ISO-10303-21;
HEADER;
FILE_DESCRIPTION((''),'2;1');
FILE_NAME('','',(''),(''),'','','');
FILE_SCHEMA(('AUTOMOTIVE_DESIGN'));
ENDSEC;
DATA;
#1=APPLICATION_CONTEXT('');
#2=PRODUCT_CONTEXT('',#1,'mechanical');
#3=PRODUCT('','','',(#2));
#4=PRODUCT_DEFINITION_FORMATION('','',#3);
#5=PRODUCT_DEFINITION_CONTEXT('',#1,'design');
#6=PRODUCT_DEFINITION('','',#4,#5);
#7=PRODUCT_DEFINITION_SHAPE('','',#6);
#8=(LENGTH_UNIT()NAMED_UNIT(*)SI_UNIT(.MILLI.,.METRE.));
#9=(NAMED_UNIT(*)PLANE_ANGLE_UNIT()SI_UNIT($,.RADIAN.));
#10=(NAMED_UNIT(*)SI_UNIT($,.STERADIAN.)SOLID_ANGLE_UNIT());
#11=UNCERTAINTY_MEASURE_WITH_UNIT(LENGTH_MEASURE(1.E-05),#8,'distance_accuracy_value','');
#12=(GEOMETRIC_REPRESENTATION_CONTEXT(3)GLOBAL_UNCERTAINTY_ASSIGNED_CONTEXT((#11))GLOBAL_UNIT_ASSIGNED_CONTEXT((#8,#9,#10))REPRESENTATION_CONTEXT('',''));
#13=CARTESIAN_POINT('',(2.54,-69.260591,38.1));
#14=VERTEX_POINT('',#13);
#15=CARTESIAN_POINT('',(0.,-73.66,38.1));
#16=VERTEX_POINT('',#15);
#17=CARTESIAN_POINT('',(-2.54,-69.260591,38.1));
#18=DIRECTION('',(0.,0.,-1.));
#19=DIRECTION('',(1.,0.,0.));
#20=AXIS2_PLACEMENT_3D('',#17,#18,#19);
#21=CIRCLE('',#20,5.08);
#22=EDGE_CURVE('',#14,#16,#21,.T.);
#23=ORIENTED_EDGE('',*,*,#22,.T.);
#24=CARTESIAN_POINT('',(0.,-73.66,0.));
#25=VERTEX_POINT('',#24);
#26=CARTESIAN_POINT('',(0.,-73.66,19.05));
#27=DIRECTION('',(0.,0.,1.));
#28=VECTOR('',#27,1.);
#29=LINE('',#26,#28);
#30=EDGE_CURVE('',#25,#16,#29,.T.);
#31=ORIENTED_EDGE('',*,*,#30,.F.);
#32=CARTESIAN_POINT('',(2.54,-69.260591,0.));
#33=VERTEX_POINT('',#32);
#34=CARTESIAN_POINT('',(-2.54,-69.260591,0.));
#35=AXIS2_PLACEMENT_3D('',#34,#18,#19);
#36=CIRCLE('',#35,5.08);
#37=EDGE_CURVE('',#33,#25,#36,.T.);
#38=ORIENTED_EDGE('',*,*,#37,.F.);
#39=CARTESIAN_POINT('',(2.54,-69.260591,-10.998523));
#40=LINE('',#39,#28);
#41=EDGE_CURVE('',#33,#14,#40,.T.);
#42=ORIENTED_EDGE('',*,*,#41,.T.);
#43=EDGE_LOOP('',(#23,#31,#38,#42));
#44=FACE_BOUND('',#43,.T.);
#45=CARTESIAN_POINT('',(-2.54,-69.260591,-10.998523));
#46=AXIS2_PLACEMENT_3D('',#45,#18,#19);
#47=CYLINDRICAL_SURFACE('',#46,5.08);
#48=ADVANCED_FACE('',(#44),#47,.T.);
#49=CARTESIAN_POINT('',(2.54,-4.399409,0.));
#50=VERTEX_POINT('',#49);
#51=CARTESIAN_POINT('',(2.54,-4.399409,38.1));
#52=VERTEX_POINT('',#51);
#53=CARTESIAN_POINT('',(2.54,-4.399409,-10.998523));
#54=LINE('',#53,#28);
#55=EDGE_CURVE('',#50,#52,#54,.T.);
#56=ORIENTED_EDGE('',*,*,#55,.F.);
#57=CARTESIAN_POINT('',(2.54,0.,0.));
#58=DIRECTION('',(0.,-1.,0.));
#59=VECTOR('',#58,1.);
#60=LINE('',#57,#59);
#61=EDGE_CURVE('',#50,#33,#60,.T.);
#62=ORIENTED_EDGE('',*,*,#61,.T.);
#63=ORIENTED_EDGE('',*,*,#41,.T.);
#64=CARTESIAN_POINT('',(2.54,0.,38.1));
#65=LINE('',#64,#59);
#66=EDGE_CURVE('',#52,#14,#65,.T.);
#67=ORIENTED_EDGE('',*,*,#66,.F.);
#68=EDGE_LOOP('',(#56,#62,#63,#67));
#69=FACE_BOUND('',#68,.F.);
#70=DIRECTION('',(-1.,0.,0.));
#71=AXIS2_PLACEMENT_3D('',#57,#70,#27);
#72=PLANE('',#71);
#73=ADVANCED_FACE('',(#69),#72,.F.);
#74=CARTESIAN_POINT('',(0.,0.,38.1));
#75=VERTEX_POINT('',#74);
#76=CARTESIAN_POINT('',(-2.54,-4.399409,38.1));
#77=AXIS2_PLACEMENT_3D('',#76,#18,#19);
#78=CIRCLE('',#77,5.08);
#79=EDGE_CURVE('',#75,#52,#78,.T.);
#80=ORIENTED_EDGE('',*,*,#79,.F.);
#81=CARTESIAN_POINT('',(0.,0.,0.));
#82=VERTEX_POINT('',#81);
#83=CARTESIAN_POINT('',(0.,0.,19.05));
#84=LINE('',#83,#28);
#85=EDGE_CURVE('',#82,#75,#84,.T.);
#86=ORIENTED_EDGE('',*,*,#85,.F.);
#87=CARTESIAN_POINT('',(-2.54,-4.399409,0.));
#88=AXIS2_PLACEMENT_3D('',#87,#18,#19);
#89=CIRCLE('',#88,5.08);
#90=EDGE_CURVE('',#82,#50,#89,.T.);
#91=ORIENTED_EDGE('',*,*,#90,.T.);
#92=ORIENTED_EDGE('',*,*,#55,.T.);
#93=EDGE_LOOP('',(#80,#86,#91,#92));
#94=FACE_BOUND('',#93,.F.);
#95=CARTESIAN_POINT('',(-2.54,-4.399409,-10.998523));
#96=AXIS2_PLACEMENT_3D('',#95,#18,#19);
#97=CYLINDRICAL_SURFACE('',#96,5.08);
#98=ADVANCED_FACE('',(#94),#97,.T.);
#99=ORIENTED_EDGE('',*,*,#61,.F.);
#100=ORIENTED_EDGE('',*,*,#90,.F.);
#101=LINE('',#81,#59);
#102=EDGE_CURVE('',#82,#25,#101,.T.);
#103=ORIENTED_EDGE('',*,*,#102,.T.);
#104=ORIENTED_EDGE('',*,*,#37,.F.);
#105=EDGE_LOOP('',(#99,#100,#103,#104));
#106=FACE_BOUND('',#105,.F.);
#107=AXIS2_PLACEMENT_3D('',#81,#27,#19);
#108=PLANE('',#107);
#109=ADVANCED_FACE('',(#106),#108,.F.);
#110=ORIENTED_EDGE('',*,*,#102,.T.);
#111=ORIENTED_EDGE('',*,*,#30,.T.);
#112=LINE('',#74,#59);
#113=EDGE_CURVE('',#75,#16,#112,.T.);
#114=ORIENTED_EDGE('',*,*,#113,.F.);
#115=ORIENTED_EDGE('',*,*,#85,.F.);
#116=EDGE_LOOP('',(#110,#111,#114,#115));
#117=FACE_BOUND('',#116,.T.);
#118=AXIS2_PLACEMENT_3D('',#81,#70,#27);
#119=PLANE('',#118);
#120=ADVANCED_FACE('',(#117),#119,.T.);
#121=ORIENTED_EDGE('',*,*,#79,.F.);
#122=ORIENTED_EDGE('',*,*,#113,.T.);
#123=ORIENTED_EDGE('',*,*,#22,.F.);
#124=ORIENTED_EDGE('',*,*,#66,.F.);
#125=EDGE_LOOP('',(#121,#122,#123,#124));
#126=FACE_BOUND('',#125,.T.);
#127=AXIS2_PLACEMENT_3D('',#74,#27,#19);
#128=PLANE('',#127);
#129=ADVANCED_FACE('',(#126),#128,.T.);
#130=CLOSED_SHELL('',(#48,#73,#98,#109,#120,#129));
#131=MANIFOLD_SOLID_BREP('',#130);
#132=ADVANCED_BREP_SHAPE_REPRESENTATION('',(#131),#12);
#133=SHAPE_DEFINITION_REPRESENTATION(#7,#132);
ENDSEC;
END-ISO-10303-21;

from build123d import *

# Parameters (mm, degrees)
F0_W        = 2.54
F0_H        = 38.1
F1_DEPTH    = 73.66
F2_T1_DEPTH = 60.0970452561


# Not quite as in the source:
# - a fillet or chamfer that OpenCascade refuses, or shapes differently, is made with other operations: its cross-section is extruded or revolved along the edge and cut away or added


with BuildPart() as f1:
    # F0 (on Front) → F1 (new body)
    with BuildSketch(Plane.XZ):
        with Locations((1.27, 19.05)):
            Rectangle(F0_W, F0_H)
    extrude(amount=F1_DEPTH)

    # F2: fillet of radius 5.08 on 2 edges, made by hand

    # F2_s2 → F2_t1 (cut)
    with BuildSketch(Plane.XY.offset(-10.9985226281)):
        with BuildLine():
            ThreePointArc((2.54, -69.2605909488), (1.8594090512, -71.8005909488), (0, -73.66))
            Line((0, -73.66), (2.54, -73.66))
            Line((2.54, -73.66), (2.54, -69.2605909488))
        make_face()
        with BuildLine():
            ThreePointArc((2.54, -4.3994090512), (1.8594090512, -1.8594090512), (0, 0))
            Line((0, 0), (2.54, 0))
            Line((2.54, 0), (2.54, -4.3994090512))
        make_face()
    extrude(amount=F2_T1_DEPTH, mode=Mode.SUBTRACT)


solid = f1.part
